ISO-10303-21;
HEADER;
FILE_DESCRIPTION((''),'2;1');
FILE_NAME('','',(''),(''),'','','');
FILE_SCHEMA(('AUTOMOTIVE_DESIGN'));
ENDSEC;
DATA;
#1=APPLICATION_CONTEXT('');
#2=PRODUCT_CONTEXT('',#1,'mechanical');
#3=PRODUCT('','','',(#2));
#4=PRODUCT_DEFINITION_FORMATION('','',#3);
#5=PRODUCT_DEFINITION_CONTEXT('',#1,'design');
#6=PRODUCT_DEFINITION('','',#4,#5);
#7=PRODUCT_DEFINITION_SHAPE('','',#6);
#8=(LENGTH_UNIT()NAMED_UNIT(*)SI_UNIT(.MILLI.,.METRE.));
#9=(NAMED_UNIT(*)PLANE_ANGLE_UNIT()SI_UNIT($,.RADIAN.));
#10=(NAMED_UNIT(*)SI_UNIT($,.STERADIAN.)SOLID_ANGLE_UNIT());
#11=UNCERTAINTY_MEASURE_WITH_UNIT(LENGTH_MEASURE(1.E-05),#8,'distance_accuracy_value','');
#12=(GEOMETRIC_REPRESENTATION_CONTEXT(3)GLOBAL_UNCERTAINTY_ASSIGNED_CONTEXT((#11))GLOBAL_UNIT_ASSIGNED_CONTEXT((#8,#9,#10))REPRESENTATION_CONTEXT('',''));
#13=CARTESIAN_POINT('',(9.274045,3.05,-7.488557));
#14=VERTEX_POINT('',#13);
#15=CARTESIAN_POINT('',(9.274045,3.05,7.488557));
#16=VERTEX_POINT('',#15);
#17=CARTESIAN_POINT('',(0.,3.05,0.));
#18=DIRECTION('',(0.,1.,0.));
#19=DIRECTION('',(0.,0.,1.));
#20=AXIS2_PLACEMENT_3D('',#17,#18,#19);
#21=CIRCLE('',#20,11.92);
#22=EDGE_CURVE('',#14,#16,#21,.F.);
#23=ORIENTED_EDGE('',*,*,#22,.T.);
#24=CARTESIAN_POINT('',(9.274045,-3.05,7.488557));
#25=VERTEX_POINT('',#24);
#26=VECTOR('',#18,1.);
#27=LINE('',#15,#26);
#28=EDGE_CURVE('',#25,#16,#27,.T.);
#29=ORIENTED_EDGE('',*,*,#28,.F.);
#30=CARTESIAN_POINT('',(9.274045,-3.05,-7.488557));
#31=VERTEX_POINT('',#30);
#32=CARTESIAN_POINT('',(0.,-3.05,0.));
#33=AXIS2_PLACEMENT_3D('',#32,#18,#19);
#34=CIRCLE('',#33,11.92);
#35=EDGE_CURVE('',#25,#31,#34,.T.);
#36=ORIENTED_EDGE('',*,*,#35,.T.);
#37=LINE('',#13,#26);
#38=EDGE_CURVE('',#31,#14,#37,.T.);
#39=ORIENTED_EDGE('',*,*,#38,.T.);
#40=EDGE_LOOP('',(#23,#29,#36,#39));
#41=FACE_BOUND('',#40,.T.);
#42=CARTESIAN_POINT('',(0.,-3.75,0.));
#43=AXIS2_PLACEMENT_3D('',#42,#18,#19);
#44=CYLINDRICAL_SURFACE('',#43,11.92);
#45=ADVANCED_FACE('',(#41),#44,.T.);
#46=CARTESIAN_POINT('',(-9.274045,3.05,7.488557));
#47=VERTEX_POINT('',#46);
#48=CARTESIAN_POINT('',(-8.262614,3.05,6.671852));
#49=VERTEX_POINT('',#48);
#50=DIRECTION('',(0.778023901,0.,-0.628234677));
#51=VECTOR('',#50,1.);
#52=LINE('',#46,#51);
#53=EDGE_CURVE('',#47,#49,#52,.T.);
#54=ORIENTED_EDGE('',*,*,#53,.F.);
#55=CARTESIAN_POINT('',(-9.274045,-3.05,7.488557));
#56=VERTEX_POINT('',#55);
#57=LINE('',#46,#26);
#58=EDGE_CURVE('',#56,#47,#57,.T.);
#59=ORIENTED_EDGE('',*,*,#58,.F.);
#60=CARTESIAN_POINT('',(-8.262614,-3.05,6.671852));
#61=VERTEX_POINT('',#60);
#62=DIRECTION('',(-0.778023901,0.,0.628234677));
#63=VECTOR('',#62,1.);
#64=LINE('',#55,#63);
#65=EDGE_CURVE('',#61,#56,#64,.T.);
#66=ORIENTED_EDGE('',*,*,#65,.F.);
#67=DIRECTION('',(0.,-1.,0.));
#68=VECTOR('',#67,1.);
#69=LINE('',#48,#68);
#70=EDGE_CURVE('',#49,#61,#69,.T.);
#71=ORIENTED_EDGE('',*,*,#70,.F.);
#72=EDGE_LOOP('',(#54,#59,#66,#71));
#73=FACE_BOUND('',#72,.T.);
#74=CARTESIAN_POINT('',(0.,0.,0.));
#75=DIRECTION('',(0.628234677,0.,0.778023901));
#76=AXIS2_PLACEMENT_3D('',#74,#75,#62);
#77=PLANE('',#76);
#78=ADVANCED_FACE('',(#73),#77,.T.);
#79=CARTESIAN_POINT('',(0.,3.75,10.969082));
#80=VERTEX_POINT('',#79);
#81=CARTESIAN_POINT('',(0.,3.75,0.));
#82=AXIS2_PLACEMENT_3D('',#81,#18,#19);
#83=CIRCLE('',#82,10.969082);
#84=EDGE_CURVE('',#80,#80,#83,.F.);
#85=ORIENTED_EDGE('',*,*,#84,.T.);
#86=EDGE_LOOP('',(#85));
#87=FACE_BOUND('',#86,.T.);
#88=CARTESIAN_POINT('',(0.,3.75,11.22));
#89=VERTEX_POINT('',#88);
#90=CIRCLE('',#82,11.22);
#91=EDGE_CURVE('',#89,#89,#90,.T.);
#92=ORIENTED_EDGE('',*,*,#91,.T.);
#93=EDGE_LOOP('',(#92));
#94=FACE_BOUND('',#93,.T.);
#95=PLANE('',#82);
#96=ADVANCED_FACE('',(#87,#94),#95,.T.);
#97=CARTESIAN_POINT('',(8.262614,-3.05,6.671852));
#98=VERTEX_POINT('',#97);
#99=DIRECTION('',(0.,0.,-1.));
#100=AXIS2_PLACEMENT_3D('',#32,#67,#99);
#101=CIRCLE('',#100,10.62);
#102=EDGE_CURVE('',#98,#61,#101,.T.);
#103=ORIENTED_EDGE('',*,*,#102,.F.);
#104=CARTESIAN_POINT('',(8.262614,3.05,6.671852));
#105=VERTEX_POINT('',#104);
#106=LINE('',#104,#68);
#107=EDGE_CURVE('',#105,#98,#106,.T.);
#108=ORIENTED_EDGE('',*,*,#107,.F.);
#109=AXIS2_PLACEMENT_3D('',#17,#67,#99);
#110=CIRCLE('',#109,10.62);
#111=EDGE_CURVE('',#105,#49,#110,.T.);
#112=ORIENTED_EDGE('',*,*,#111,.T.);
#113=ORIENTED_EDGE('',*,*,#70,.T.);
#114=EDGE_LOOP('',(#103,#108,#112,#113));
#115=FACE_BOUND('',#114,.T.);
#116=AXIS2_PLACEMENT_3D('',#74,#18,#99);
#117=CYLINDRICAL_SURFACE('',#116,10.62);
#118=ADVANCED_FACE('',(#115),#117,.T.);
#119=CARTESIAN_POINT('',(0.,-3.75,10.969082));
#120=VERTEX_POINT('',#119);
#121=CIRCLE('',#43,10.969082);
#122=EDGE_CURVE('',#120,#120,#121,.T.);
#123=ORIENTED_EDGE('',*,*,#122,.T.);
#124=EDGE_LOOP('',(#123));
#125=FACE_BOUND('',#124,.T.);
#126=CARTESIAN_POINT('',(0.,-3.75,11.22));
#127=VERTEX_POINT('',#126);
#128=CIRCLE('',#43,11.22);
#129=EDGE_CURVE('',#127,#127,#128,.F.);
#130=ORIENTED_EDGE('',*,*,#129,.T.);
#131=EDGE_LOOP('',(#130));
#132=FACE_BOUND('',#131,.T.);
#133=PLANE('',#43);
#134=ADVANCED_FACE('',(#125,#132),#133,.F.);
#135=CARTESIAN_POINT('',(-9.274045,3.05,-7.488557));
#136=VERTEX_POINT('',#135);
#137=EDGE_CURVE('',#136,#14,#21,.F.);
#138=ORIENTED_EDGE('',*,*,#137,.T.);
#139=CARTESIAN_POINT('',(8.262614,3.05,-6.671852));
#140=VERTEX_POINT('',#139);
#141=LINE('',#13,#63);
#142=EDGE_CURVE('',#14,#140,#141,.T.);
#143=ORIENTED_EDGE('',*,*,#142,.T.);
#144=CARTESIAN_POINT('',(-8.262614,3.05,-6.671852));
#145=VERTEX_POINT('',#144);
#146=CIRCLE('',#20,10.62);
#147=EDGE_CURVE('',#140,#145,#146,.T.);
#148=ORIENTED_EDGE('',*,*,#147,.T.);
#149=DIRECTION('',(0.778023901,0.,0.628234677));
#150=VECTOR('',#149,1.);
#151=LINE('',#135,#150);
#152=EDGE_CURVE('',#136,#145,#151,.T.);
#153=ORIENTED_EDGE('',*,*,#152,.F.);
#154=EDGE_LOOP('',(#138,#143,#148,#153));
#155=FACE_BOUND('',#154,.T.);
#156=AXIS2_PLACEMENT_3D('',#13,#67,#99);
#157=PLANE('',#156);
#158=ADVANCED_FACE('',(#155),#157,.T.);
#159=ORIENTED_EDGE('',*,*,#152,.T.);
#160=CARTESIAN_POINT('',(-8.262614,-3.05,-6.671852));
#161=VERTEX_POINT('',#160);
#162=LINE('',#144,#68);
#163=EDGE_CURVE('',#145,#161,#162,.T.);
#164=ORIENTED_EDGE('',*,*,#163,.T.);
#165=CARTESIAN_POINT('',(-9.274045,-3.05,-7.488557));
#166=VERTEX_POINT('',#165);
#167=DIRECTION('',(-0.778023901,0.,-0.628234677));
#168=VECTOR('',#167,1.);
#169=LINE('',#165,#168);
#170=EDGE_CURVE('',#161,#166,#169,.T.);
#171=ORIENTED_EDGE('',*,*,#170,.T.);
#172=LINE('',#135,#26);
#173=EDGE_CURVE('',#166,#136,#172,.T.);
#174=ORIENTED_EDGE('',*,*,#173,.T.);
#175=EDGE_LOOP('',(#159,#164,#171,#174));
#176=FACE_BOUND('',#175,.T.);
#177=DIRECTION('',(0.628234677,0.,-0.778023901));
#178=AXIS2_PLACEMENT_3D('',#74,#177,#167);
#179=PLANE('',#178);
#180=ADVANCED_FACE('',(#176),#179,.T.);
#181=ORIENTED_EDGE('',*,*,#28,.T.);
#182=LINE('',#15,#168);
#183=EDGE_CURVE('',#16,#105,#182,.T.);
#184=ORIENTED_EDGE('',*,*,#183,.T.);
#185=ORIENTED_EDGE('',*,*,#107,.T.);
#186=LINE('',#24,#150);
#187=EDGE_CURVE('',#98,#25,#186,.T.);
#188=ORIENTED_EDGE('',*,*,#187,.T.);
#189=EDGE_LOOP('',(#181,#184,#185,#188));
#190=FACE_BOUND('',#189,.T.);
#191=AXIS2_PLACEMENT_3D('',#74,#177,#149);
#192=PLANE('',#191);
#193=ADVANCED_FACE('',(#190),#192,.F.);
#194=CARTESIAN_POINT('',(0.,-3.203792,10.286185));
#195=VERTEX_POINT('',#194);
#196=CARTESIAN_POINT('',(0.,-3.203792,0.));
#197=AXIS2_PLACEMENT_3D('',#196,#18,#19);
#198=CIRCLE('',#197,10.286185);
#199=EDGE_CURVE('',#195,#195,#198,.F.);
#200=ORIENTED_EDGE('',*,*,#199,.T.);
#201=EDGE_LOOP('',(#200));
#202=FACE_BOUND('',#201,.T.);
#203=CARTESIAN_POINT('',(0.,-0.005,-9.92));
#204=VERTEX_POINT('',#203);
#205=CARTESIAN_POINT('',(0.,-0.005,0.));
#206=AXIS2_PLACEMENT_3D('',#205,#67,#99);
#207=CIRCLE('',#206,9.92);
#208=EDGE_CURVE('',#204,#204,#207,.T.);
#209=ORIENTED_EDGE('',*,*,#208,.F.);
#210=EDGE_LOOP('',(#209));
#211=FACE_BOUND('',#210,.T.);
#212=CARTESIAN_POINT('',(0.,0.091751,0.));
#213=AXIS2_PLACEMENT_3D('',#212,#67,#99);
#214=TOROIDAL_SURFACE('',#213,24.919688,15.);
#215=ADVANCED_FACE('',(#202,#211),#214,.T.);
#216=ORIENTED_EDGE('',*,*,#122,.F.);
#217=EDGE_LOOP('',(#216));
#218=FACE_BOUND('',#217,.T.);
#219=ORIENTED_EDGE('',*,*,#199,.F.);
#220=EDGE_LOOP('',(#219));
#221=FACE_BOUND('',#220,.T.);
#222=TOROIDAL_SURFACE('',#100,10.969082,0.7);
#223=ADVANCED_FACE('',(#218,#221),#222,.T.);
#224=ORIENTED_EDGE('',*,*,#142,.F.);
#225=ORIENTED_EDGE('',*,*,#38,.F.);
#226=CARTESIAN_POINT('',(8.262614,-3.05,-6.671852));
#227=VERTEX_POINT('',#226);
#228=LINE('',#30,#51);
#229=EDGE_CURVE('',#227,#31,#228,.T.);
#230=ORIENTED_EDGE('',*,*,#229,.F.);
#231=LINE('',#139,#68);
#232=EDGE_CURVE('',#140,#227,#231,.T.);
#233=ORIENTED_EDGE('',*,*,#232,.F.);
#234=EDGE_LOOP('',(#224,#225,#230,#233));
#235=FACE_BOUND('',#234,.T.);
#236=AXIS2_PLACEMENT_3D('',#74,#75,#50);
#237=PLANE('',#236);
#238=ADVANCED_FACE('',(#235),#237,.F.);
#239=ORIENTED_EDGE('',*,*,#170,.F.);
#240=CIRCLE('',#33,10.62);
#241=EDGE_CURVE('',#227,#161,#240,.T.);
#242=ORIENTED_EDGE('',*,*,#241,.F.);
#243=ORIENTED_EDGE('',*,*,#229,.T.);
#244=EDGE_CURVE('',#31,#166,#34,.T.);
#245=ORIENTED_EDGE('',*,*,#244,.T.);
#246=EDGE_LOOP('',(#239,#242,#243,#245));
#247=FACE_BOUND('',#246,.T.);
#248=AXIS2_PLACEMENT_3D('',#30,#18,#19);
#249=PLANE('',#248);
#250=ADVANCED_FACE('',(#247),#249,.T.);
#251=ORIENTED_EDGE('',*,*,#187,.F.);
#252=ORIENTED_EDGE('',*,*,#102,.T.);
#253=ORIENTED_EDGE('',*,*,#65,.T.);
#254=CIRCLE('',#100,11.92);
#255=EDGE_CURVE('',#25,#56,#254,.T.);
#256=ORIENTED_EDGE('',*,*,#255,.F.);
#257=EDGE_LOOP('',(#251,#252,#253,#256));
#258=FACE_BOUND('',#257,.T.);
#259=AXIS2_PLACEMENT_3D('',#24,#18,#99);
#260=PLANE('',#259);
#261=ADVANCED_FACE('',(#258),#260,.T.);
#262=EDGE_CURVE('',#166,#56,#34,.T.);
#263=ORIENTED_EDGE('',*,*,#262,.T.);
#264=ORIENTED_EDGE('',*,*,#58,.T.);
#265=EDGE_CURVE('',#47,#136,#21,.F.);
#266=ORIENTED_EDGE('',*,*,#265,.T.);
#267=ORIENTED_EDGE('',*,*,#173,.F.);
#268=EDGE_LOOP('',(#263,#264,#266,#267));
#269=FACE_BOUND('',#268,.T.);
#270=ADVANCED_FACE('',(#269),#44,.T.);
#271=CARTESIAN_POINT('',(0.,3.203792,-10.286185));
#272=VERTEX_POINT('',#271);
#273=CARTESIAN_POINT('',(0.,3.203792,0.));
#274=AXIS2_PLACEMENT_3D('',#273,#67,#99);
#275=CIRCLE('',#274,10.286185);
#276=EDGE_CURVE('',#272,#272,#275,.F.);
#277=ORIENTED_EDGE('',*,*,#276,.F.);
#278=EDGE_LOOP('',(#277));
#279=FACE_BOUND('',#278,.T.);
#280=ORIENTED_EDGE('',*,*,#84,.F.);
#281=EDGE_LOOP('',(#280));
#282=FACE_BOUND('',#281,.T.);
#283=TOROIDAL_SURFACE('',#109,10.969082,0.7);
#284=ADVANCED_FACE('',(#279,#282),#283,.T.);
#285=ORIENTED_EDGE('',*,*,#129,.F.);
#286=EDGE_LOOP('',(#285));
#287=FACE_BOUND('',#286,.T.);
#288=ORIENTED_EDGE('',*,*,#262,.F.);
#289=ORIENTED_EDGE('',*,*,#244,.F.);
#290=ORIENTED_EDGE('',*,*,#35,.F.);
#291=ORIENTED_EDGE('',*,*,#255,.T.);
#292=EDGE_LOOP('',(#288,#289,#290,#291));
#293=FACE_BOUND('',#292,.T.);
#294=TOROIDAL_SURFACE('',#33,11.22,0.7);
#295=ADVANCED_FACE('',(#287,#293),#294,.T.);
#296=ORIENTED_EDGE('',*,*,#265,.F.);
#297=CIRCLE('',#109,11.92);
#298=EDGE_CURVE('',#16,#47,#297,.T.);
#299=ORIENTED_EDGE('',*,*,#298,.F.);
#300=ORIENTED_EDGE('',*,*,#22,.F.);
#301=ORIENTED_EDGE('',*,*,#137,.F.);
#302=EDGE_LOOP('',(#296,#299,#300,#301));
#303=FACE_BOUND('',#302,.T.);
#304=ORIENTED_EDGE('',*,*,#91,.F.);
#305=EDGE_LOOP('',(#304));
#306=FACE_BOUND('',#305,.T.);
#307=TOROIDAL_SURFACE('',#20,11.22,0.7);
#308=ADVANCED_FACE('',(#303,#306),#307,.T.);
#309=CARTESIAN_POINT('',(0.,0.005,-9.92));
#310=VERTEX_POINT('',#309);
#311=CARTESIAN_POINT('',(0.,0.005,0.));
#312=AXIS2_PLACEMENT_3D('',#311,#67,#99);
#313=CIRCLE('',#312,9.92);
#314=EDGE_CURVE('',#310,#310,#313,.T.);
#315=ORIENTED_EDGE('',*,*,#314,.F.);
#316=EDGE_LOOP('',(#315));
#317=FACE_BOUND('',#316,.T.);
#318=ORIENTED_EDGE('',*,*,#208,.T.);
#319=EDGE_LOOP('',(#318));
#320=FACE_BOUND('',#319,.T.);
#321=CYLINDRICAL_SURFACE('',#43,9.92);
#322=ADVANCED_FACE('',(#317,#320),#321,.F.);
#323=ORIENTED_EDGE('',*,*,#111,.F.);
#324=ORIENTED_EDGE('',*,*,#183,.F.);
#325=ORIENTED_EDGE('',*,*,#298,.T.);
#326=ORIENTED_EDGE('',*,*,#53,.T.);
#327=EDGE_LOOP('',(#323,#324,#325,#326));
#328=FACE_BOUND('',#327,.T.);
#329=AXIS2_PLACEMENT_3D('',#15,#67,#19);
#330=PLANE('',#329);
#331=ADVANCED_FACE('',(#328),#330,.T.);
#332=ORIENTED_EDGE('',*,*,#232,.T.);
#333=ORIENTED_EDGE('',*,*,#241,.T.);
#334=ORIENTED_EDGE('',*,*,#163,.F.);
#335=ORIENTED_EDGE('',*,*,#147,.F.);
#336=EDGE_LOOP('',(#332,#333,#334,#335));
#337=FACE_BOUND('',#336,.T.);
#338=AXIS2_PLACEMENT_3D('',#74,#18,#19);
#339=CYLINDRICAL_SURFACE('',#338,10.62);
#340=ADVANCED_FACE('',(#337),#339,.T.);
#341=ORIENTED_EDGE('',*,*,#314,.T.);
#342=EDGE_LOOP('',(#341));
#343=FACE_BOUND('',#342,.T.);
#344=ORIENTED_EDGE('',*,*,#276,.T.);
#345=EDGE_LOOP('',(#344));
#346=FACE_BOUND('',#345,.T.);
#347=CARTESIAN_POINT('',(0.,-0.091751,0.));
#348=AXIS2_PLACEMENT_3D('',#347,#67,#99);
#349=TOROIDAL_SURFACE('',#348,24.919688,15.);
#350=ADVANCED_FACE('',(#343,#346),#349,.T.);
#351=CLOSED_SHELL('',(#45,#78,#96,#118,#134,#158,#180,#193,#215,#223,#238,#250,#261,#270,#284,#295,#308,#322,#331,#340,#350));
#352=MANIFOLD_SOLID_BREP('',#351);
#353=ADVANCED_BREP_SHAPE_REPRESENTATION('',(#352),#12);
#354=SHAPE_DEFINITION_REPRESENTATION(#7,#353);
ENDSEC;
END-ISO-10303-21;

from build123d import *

# Parameters (mm, degrees)
BOSS_EXTRUDE1_DEPTH      = 3.75
BOSS_EXTRUDE1_DEPTH_BACK = 3.75
SKETCH1_R                = 11.92
SKETCH1_R_2              = 9.92
FILLET1_R                = 0.7
FILLET3_R                = 0.7
CUT_REVOLVE2_START       = -3.05
CUT_REVOLVE2_DEPTH       = 6.1


# Read off the part's stored shape, not the designer's step: Cut-Revolve2
with BuildPart() as part:
    # Sketch1 → Boss-Extrude1 (new, two sides: drawn at the far end of the back side and taken through both)
    with BuildSketch(Plane(origin=(0, 0, 0), x_dir=(1, 0, 0), z_dir=(0, 1, 0)).offset(-BOSS_EXTRUDE1_DEPTH_BACK)):
        with Locations(Location((0, 0, 0), (0, 0, 270))):
            Circle(SKETCH1_R)
        with Locations(Location((0, 0, 0), (0, 0, 270))):
            Circle(SKETCH1_R_2, mode=Mode.SUBTRACT)
    extrude(amount=BOSS_EXTRUDE1_DEPTH + BOSS_EXTRUDE1_DEPTH_BACK)

    # Fillet1
    fillet1_edges = [part.edges().sort_by_distance(p)[0] for p in [
        (0, -3.75, -11.92),
        (0, 3.75, -11.92),
    ]]
    fillet(fillet1_edges, radius=FILLET1_R)

    # Sketch3 → Cut-Revolve1 (revolve, cut)
    with BuildSketch(Plane(origin=(0, 0, 0), x_dir=(0, 0, -1), z_dir=(1, 0, 0)), mode=Mode.PRIVATE) as cut_revolve1_sk:
        with BuildLine():
            Line((-9.92, 3.75), (-9.92, 0.005))
            ThreePointArc((-9.92, 0.005), (-10.051616425, 1.893305551), (-10.42, 3.75))
            Line((-10.42, 3.75), (-9.92, 3.75))
        make_face()
        with BuildLine():
            Line((-9.92, -3.75), (-10.42, -3.75))
            ThreePointArc((-10.42, -3.75), (-10.051616425, -1.893305551), (-9.92, -0.005))
            Line((-9.92, -0.005), (-9.92, -3.75))
        make_face()
    revolve(cut_revolve1_sk.sketch.rotate(Axis((0, 0, 0), (0, 1, 0)), 180), axis=Axis((0, 0, 0), (0, 1, 0)), mode=Mode.SUBTRACT)

    # Fillet3
    fillet3_edges = [part.edges().sort_by_distance(p)[0] for p in [
        (0, 3.75, 10.42),
        (0, -3.75, 10.42),
    ]]
    fillet(fillet3_edges, radius=FILLET3_R)

    # Cut-Revolve2 outline → Cut-Revolve2 (cut)
    with BuildSketch(Plane(origin=(0, 0, 0), x_dir=(1, 0, 0), z_dir=(0, 1, 0)).offset(CUT_REVOLVE2_START)):
        with BuildLine():
            ThreePointArc((-8.262613825, 6.671852275), (0, 10.62), (8.262613825, 6.671852275))
            Line((8.262613825, 6.671852275), (9.274044896, 7.488557356))
            ThreePointArc((9.274044896, 7.488557356), (0, 11.92), (-9.274044896, 7.488557356))
            Line((-9.274044896, 7.488557356), (-8.262613825, 6.671852275))
        make_face()
    cut_revolve2 = extrude(amount=CUT_REVOLVE2_DEPTH, mode=Mode.SUBTRACT)

    # Mirror3: Cut-Revolve2 across plane
    add(cut_revolve2.mirror(Plane.XY), mode=Mode.SUBTRACT)


solid = part.part
